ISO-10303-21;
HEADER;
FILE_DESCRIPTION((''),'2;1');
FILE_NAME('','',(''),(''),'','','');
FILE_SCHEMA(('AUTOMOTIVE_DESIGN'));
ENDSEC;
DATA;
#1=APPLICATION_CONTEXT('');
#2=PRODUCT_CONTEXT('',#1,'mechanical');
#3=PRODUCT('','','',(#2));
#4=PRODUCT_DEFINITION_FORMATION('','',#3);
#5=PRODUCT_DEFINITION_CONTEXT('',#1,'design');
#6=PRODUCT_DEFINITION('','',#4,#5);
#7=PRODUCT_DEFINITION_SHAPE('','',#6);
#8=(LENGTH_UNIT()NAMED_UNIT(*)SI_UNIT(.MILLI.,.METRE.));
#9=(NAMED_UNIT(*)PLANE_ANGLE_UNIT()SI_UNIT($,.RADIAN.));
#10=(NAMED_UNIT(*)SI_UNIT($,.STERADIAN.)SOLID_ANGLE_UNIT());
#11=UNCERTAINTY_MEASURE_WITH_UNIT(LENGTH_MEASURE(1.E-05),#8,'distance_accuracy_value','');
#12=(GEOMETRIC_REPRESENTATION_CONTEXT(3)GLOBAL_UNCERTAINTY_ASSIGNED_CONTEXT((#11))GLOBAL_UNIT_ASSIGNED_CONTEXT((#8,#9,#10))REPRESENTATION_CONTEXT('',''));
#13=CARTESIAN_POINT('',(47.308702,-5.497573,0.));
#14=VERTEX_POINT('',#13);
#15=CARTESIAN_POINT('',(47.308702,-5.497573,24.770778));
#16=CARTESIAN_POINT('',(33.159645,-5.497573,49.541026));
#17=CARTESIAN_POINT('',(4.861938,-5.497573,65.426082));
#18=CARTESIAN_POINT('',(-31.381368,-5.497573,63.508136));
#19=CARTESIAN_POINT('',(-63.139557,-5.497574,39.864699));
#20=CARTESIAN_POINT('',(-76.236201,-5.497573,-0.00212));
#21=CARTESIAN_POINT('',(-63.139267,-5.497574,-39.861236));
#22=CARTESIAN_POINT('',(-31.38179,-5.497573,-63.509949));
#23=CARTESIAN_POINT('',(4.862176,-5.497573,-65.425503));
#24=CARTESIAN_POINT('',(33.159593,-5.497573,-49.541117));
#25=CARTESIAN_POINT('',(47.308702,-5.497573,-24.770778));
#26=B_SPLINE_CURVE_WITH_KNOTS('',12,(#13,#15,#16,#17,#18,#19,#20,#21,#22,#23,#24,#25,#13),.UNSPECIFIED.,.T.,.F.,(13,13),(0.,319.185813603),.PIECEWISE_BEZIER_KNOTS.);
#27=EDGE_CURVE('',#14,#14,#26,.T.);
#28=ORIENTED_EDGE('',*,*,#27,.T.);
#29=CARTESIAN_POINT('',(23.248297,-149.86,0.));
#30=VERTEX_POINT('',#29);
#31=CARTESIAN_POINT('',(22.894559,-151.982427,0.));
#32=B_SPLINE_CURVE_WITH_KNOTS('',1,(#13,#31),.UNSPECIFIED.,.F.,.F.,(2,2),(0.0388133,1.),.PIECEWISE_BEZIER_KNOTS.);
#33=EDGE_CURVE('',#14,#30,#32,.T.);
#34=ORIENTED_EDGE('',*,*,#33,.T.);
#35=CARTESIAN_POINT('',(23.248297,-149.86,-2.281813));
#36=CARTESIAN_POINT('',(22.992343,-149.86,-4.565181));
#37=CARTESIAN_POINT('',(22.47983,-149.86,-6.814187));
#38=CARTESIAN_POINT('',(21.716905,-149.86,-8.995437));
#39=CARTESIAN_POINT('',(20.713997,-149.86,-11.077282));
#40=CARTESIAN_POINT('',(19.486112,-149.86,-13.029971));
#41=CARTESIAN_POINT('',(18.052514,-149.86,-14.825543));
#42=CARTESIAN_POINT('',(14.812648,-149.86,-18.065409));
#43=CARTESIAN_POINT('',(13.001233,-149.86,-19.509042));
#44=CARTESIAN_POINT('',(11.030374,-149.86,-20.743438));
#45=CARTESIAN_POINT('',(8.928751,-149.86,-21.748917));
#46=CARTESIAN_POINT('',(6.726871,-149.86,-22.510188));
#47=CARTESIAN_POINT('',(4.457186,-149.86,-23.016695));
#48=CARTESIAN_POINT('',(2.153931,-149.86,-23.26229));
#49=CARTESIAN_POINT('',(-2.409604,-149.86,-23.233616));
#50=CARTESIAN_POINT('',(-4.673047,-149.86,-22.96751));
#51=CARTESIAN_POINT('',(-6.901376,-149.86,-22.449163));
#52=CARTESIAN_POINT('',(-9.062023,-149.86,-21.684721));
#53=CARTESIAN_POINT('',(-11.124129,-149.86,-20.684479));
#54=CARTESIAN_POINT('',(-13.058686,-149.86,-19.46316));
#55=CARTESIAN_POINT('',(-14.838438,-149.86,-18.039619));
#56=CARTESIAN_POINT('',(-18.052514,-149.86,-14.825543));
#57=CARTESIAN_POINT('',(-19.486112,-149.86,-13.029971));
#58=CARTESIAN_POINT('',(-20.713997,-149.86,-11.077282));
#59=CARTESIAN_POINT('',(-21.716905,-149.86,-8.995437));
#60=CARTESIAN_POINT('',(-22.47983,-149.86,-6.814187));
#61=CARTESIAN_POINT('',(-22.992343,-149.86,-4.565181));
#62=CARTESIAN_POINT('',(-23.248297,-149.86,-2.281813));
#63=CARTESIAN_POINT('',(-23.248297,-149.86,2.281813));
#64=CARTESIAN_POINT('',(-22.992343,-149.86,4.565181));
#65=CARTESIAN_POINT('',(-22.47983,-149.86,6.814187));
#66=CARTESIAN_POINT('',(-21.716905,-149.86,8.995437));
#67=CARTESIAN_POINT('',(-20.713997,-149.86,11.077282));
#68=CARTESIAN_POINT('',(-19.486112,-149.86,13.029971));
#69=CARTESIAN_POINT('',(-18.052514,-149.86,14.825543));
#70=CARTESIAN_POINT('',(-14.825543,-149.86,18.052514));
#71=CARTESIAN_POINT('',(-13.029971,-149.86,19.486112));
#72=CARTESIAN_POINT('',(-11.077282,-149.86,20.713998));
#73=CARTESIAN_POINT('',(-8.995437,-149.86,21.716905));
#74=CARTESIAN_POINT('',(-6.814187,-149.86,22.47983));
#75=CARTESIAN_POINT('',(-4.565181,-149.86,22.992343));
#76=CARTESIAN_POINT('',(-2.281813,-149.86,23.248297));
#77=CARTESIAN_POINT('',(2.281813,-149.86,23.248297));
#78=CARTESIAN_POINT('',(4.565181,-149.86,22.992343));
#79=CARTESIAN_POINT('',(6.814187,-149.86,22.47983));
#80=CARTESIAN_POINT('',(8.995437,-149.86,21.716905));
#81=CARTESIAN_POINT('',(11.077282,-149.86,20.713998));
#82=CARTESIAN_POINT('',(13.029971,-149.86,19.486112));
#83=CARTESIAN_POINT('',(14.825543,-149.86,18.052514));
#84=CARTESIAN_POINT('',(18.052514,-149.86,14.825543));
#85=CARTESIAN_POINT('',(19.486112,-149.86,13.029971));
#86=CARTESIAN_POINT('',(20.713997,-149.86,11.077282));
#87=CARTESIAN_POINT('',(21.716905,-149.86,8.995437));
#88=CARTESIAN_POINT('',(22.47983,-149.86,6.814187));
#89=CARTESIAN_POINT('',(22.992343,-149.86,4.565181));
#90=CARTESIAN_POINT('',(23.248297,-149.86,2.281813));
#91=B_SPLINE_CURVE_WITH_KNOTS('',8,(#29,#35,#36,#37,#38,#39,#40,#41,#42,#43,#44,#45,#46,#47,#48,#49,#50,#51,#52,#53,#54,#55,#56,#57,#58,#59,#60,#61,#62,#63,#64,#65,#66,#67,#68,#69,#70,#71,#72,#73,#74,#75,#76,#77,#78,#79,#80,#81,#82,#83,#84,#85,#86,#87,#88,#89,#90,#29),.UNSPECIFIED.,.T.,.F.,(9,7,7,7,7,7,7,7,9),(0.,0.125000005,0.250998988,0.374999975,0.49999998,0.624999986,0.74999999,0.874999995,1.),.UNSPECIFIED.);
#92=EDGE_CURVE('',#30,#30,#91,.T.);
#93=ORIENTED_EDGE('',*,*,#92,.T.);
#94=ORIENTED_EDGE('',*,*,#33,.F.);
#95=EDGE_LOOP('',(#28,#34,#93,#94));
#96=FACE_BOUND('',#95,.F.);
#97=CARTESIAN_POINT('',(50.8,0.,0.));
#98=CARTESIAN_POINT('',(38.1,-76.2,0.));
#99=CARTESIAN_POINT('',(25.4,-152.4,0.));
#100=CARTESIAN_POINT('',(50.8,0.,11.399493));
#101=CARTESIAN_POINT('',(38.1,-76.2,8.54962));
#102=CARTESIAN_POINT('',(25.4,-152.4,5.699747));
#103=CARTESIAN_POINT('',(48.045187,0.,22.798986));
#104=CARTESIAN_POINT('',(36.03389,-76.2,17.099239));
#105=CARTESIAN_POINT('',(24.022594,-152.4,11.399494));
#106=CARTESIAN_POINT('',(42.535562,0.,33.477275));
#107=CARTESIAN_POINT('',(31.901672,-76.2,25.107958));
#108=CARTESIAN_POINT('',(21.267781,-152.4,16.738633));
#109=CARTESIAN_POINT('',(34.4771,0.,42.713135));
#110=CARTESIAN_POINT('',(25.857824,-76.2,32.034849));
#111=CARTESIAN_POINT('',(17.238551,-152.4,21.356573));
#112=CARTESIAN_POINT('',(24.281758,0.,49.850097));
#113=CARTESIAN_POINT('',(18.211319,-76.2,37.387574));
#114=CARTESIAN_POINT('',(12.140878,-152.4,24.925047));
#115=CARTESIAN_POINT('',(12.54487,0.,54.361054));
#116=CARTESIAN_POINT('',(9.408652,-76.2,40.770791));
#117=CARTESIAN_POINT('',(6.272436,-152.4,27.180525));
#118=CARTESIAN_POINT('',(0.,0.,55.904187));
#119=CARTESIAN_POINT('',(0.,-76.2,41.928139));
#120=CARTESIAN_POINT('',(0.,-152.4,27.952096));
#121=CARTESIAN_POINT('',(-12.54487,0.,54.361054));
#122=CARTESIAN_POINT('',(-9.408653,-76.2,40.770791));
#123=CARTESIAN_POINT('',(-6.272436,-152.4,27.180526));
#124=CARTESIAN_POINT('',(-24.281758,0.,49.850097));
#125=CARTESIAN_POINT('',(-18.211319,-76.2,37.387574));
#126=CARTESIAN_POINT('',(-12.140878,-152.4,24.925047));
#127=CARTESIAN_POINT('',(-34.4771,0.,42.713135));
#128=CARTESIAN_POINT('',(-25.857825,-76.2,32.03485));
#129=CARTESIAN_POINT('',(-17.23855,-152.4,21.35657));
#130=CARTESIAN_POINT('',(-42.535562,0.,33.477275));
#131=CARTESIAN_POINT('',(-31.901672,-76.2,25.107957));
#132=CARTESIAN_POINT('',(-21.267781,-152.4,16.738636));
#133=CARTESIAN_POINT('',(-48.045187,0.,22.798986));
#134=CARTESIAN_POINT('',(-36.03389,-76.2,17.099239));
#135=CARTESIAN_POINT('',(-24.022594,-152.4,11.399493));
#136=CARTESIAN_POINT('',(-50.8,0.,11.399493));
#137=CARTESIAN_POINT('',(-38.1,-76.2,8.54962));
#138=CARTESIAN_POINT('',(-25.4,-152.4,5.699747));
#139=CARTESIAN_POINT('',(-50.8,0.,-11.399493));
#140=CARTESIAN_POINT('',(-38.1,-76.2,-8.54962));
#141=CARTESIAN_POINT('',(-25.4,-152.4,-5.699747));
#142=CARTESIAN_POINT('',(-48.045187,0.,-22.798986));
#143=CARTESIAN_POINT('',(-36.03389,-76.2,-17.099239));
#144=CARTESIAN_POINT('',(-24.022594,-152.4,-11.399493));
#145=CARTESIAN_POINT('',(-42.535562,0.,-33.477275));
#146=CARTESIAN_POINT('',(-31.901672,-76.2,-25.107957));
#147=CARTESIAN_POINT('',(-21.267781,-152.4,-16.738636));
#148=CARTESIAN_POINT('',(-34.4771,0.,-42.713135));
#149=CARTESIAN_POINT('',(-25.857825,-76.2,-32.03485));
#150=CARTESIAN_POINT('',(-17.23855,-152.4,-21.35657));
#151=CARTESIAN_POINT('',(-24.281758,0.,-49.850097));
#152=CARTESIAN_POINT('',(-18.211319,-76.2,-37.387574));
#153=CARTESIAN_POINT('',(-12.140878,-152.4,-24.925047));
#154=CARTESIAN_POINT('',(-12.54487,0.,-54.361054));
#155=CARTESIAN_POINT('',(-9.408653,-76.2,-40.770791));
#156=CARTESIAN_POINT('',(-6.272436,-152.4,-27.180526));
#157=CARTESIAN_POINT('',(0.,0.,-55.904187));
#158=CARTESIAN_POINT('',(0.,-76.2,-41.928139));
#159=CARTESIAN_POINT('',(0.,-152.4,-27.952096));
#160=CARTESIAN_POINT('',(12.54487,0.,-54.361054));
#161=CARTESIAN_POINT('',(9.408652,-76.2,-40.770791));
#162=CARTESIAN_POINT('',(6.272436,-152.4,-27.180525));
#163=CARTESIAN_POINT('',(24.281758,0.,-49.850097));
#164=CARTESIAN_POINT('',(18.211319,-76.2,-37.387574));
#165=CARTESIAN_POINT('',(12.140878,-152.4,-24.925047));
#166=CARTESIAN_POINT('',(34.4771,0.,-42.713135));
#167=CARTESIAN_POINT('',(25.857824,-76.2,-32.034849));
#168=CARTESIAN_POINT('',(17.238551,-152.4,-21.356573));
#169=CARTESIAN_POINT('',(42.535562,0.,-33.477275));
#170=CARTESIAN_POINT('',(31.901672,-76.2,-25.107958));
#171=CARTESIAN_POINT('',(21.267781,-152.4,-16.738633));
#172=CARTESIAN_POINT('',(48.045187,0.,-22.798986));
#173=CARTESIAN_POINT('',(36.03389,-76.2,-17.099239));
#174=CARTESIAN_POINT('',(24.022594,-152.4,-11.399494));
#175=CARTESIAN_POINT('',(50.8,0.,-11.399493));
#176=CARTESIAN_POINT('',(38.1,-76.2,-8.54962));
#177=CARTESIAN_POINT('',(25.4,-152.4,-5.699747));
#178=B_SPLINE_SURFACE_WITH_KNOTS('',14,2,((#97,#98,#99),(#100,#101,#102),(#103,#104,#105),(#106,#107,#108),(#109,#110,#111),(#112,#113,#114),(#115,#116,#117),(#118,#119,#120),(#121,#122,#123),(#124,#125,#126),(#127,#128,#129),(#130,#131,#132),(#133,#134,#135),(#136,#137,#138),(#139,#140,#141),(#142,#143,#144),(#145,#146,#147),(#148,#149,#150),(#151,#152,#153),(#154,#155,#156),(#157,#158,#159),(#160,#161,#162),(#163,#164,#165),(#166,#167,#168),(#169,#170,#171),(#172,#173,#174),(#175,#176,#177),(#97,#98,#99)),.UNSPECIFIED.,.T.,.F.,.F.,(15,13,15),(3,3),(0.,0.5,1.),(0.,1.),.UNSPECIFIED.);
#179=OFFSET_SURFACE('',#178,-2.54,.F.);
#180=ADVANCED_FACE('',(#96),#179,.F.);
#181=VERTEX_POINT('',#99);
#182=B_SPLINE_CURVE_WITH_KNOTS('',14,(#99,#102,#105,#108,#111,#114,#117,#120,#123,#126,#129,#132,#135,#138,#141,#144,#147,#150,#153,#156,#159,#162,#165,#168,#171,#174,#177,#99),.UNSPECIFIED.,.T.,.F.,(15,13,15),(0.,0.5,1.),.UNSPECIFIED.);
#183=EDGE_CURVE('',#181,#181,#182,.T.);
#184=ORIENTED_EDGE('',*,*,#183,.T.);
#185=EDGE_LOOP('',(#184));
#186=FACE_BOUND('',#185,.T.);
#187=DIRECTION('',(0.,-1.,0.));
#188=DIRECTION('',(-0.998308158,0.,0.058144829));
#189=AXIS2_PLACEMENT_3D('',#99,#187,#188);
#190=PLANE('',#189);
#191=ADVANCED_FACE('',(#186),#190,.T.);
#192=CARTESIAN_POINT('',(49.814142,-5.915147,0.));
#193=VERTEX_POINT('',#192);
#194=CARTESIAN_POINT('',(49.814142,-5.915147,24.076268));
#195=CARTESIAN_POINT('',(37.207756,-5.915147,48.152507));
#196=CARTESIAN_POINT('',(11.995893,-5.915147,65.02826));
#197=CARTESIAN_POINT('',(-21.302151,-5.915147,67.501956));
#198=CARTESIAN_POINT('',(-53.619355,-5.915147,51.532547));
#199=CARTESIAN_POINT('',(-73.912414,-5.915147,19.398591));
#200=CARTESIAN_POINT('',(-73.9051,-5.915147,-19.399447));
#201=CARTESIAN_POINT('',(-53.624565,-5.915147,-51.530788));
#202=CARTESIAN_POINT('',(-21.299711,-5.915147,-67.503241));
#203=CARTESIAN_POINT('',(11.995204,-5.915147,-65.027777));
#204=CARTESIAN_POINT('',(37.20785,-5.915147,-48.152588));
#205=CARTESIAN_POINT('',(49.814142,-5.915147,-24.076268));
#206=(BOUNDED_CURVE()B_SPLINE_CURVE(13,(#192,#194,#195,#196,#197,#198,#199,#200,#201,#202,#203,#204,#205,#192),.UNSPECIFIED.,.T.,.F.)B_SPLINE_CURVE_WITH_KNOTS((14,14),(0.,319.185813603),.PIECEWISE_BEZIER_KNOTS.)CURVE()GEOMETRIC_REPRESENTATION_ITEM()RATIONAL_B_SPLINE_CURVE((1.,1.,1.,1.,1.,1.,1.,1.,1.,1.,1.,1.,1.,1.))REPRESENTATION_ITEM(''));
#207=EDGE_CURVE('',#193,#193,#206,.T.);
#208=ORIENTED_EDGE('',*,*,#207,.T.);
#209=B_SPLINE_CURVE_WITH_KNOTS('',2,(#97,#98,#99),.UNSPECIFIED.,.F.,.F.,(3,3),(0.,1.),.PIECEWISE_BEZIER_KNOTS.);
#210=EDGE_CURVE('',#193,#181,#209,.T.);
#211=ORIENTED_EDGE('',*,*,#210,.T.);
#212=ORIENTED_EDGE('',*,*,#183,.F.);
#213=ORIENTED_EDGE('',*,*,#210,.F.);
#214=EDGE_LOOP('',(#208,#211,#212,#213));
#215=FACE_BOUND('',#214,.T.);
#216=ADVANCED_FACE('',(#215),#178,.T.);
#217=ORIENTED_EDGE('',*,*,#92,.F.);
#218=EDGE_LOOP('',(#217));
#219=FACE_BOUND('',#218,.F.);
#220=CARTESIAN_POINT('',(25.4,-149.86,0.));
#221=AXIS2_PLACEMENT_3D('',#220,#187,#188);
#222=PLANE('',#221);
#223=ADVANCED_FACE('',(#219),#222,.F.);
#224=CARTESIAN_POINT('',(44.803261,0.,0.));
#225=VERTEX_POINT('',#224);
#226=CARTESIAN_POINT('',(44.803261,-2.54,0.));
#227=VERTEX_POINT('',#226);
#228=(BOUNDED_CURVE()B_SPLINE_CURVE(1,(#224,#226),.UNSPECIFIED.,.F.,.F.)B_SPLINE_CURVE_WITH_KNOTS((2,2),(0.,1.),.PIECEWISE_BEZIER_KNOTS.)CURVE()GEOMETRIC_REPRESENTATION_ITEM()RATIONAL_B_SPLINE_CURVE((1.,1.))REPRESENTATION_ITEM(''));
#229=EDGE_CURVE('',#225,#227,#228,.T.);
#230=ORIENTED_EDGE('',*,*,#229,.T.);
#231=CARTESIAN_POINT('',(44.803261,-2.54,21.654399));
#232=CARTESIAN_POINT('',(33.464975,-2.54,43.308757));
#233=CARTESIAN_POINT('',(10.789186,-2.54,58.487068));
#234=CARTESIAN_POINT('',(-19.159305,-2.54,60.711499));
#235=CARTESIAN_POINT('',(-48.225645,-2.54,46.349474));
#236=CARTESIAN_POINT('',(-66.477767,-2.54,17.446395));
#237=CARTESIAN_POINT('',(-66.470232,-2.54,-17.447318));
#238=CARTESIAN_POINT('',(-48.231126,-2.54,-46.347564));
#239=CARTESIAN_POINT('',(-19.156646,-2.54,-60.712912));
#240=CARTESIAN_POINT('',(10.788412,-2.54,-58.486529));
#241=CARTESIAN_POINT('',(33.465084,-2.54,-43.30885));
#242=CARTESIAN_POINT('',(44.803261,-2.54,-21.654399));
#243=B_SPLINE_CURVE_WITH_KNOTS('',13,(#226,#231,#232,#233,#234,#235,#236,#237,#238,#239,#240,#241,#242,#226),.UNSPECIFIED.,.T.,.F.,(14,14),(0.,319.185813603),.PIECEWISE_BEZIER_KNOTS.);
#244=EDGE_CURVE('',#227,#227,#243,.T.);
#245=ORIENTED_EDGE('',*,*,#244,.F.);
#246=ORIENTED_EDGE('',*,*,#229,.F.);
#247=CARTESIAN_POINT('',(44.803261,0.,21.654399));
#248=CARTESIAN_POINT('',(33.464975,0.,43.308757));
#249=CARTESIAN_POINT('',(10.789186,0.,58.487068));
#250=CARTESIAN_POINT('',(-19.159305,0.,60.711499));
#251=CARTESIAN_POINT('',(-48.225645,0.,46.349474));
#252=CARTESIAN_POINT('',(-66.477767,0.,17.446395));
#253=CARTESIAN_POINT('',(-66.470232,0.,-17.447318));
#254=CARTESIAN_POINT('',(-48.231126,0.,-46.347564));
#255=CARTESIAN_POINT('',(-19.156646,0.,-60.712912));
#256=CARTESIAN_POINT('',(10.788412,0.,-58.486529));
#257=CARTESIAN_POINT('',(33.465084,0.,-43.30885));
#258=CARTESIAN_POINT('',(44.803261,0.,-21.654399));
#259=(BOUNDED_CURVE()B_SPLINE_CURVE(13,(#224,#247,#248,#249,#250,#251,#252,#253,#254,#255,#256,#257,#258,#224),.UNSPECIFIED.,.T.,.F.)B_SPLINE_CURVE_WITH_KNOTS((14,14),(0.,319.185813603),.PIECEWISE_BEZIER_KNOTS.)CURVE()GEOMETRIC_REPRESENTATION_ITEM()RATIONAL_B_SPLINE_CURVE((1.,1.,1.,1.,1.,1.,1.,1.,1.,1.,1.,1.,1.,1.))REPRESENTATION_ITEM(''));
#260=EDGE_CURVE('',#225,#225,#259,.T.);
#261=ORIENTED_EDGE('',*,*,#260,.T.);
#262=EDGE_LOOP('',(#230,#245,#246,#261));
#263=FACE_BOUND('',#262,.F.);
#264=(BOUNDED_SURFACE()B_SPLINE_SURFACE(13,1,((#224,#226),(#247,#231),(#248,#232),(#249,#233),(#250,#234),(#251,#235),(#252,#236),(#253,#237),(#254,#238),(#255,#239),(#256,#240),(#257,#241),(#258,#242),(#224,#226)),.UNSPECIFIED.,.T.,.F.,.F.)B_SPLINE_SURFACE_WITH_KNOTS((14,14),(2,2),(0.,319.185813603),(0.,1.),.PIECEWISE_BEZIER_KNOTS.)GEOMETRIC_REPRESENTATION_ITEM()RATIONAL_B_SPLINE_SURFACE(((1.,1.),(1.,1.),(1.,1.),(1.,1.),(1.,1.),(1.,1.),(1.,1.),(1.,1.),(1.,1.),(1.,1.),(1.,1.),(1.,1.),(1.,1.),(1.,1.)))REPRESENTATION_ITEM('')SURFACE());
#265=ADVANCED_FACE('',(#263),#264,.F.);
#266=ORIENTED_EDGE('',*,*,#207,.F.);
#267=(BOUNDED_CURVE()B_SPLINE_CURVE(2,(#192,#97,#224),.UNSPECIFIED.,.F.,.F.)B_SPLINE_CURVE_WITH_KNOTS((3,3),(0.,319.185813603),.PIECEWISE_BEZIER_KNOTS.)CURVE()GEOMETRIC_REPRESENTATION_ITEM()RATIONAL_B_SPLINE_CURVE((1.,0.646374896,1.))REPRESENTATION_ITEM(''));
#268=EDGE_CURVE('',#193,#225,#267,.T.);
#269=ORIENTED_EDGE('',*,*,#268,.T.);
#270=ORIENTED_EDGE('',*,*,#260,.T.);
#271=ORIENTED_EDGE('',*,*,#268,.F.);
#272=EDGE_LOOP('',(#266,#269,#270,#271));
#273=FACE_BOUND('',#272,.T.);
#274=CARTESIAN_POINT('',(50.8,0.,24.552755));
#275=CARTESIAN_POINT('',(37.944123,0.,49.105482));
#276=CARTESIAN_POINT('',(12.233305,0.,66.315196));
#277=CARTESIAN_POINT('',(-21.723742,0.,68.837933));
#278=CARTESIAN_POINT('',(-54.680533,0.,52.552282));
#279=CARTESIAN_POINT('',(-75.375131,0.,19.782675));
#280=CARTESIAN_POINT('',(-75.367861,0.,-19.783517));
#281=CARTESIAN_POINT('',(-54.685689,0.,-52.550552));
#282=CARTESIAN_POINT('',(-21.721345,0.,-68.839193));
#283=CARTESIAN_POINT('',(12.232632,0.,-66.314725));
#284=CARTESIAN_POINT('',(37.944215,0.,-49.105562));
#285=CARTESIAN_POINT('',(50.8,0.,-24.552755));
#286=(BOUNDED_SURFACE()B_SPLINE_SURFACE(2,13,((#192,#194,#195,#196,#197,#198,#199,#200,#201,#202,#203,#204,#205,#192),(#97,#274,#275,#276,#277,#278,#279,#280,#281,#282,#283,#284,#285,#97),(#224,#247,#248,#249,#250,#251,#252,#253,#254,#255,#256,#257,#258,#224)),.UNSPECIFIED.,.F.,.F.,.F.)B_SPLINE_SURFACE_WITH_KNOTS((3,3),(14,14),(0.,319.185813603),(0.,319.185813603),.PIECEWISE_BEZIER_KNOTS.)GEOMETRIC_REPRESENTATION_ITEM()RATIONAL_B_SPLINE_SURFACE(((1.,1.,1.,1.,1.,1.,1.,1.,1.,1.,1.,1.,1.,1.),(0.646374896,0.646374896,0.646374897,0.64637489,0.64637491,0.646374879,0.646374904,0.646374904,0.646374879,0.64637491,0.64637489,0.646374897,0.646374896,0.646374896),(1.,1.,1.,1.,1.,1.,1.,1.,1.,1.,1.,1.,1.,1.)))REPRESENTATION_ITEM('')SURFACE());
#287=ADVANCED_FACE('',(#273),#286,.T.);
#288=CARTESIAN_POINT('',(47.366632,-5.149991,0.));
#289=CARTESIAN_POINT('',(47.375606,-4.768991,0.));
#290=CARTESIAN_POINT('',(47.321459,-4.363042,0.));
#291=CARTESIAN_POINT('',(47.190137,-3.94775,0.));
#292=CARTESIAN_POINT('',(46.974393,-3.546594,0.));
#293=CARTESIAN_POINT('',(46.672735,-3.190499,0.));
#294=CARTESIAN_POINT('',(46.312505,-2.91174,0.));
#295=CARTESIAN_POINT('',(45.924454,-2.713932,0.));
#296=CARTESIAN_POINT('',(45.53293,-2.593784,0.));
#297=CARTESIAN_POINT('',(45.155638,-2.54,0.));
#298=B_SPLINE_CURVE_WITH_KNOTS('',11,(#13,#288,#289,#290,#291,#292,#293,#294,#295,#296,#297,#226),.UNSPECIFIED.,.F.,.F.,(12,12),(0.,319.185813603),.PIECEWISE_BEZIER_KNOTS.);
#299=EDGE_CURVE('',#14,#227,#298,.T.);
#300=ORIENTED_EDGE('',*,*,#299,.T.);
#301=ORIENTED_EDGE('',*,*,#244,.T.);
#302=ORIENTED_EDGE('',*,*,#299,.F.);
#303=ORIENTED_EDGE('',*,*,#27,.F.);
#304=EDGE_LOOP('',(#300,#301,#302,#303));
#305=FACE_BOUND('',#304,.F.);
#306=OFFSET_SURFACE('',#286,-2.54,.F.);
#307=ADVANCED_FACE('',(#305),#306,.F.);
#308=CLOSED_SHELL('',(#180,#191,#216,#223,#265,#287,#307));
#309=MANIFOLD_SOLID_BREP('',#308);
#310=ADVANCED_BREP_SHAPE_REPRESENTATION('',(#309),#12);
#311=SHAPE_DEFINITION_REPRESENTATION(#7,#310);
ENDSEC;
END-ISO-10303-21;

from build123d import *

# Parameters (mm, degrees)
F2_R = 50.8
F3_R = 38.1
F4_R = 25.4
F6_R = 5.08
F7_T = 2.54


# Not quite as in the source:
# - a shell that OpenCascade refuses in one call is made with other operations: the cavity is built on its own and cut out


with BuildPart() as f5:
    # F2 (on Front) → F5 section 0
    with BuildSketch(Plane.XZ):
        Circle(F2_R)
    # F3 (on offset) → F5 section 1
    with BuildSketch(Plane.XZ.offset(76.2)):
        Circle(F3_R)
    # F4 (on offset) → F5 section 2
    with BuildSketch(Plane.XZ.offset(152.4)):
        Circle(F4_R)
    loft()

    # F6
    f6_edges = [f5.edges().sort_by_distance(p)[0] for p in [
        (-50.8, 0, 0),
    ]]
    fillet(f6_edges, radius=F6_R)

    # F7: shell of thickness 2.54, made by hand


with BuildPart() as f7_core1:
    # F7_t2: copy of F5
    add(f5.part)

    # the walls: a layer under each face that stays
    f7_faces = [f7_core1.faces().sort_by_distance(p)[0] for p in [
        (-37.6070710965, -79.1575734206, 0),
        (-48.6794015958, -1.7964155275, 1.2168e-06),
        (2.7e-09, -152.4, -1.5e-09),
    ]]
    thicken(f7_faces, amount=-F7_T, mode=Mode.SUBTRACT)


with BuildPart() as f5_1:
    add(f5.part)

    # what is left inside the walls is the cavity
    f7_cavity = [f7_core1.part.solids().sort_by_distance(p)[0] for p in [
        (-39.263512, -53.614207, 0),
    ]]
    add(f7_cavity, mode=Mode.SUBTRACT)


solid = f5_1.part
